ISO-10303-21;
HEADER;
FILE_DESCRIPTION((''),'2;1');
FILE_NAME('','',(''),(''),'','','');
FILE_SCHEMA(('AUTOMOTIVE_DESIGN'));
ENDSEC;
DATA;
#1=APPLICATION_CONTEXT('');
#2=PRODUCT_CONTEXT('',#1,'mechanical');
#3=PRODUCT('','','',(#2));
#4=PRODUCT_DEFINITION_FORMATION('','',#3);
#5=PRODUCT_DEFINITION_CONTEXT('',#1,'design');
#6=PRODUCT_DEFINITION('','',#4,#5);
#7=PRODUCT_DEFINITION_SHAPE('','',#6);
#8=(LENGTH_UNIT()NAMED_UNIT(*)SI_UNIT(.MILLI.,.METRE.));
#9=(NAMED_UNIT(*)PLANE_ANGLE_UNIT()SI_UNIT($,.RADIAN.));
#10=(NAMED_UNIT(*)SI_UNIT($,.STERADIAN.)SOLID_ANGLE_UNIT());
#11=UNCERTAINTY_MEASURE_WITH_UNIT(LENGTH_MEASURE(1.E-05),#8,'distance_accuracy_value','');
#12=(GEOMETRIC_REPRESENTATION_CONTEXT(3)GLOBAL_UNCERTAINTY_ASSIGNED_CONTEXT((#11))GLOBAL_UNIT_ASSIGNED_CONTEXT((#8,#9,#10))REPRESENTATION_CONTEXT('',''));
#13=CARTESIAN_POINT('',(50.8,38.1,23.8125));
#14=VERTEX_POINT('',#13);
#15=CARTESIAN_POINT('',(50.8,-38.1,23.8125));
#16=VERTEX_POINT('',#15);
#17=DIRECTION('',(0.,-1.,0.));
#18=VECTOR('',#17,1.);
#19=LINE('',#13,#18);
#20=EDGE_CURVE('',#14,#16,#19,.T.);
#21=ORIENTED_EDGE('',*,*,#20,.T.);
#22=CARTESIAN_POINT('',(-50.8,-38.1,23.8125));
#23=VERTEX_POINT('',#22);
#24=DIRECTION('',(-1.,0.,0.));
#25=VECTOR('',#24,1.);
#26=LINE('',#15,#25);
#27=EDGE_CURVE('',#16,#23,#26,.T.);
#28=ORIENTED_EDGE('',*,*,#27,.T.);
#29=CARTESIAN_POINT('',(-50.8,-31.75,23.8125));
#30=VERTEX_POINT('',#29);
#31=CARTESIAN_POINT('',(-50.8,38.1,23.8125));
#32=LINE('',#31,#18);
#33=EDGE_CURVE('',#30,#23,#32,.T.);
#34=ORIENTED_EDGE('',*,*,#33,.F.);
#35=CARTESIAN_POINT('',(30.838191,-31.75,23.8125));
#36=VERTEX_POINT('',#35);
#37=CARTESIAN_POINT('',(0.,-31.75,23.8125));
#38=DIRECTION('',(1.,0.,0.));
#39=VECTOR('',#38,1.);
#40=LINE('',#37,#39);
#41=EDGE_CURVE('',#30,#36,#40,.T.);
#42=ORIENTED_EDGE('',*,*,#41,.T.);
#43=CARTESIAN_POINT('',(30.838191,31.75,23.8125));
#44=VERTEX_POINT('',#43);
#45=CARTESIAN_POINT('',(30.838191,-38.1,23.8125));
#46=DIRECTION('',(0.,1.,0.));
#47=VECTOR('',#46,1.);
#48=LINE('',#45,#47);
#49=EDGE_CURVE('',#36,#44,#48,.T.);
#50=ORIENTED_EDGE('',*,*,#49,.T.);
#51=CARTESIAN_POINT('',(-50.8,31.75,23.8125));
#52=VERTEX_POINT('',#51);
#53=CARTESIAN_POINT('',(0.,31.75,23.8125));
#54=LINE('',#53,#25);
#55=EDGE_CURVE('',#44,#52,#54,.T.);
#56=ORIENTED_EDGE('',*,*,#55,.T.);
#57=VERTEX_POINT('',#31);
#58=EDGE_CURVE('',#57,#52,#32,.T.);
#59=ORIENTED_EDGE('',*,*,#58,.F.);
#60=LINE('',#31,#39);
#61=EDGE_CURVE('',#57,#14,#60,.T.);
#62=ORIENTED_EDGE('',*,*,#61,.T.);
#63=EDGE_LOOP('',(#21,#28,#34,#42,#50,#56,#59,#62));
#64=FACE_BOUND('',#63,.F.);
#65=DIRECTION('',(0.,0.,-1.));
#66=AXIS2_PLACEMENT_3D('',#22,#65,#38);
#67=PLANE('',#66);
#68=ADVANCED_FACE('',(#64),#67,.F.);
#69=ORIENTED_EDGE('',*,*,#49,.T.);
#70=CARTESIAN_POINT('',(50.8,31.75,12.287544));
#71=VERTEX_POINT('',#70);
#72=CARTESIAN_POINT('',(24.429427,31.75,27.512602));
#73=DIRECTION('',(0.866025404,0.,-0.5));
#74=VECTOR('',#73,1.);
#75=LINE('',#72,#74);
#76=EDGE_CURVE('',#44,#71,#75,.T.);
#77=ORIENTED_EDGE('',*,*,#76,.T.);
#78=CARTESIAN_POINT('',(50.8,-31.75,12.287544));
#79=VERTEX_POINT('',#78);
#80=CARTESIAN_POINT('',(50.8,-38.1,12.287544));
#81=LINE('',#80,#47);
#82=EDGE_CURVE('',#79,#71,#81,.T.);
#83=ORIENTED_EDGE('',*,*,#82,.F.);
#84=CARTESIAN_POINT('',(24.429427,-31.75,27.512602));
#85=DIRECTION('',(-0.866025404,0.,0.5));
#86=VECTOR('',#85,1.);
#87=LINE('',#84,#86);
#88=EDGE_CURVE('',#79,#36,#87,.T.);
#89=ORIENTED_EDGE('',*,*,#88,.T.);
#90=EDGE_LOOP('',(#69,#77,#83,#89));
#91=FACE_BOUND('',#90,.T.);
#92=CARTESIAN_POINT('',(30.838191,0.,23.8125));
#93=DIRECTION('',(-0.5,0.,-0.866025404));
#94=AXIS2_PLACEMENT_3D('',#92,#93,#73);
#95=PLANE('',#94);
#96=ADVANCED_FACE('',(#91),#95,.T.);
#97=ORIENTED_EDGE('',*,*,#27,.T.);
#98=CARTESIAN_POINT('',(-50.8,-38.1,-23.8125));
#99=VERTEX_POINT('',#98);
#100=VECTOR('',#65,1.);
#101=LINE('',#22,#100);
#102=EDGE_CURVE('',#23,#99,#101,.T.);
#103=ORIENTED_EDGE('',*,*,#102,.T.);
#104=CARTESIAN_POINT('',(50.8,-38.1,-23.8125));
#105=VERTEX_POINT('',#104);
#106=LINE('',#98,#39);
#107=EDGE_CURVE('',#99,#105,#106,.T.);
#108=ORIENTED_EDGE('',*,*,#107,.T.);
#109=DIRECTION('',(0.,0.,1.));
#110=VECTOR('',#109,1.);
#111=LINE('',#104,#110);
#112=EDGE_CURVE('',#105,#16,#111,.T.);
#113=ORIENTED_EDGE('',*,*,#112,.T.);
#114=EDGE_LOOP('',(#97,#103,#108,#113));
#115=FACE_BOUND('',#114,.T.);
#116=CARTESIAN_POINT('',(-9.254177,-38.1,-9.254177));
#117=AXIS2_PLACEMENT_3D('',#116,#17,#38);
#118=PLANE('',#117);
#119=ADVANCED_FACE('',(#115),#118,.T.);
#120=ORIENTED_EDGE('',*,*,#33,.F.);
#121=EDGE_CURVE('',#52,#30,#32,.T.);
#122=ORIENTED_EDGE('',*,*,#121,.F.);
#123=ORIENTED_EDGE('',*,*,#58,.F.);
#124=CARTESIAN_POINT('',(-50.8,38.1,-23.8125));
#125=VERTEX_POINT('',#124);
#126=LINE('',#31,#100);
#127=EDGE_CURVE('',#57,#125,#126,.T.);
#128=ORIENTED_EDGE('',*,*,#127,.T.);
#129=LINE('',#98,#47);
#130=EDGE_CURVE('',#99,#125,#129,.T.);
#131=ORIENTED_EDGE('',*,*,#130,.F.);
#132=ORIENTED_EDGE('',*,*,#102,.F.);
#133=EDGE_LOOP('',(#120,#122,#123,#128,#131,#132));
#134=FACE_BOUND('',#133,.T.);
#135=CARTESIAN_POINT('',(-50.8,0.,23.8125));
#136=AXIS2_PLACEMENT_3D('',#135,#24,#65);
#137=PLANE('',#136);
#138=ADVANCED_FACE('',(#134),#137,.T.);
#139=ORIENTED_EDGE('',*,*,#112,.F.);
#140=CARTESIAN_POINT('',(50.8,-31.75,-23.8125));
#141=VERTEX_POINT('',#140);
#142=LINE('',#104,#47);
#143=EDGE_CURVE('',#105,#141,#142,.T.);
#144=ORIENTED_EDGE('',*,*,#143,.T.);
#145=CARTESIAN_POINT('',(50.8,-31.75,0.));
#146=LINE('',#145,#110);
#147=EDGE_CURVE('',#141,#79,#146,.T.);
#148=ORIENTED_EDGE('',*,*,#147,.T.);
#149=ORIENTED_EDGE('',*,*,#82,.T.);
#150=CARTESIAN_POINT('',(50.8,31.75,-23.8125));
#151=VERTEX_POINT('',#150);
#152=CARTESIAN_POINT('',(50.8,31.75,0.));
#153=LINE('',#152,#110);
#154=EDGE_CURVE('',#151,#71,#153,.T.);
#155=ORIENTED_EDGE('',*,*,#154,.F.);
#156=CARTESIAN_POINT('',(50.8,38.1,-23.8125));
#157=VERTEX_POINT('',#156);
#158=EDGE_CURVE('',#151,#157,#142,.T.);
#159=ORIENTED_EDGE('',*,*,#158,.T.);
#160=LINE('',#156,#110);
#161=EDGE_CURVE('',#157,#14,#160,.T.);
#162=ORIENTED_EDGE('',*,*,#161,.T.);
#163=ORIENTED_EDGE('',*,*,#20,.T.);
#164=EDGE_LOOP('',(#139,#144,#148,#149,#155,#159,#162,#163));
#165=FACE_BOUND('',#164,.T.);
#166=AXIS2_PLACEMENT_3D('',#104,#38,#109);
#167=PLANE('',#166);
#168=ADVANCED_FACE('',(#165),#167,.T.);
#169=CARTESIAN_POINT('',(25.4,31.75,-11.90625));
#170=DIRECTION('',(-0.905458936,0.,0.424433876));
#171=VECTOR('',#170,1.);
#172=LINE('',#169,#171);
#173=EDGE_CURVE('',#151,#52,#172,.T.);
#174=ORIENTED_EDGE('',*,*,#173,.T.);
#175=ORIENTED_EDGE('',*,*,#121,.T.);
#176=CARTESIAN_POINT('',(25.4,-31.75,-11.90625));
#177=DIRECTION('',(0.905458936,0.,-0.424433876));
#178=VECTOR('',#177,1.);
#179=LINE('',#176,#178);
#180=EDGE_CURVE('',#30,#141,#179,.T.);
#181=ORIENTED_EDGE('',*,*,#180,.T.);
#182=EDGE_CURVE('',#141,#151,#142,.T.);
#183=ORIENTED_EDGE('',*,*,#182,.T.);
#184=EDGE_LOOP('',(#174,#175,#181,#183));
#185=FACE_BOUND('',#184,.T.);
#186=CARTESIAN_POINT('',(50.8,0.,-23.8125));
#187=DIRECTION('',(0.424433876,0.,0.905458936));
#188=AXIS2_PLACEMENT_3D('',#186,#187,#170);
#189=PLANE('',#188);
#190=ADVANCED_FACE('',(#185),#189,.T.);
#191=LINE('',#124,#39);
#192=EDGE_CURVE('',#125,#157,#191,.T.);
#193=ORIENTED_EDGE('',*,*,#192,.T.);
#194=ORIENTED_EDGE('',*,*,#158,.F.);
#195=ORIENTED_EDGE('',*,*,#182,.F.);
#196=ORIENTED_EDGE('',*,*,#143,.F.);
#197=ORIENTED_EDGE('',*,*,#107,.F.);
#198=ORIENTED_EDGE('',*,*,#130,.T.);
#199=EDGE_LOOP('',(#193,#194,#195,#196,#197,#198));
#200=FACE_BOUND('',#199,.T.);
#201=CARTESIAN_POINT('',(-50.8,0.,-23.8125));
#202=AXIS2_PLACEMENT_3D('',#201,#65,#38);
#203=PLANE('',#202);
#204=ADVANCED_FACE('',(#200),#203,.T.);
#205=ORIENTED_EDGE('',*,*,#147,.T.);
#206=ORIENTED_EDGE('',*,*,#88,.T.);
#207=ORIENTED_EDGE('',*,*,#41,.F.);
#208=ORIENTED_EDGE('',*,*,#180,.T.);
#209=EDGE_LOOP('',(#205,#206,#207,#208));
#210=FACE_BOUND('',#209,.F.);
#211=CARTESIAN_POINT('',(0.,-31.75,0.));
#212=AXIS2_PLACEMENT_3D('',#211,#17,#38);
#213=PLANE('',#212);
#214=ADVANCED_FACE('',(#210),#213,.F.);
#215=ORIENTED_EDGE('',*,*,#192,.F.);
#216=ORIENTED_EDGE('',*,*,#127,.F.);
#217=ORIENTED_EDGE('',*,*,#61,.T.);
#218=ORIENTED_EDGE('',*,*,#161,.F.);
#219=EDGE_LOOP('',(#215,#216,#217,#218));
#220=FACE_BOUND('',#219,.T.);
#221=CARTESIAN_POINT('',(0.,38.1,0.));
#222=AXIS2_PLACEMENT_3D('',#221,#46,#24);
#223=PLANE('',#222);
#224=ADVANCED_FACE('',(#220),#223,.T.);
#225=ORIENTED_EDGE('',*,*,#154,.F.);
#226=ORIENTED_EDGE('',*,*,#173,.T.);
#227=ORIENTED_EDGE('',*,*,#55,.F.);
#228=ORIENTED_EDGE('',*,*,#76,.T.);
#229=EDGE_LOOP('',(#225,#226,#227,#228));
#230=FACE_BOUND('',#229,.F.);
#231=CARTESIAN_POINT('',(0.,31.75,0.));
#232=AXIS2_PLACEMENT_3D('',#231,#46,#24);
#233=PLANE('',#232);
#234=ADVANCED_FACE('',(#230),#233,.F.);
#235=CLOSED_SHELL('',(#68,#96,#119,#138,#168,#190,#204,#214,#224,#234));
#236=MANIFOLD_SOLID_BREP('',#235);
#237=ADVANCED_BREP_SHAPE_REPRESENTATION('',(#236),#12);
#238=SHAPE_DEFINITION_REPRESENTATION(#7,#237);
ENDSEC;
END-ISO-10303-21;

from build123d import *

# Parameters (mm, degrees)
F1_DEPTH = 38.1
F2_W     = 101.6
F2_H     = 47.625
F3_DEPTH = 6.35
F4_W     = 101.6
F4_H     = 47.625
F5_DEPTH = 6.35


# Not quite as in the source:
# - a feature names something its author has since deleted; it is built from what else it names


with BuildPart() as f1:
    # F0 (on Front) → F1 (new body, symmetric)
    with BuildSketch(Plane.XZ):
        Polygon((50.8, 12.2875440849), (50.8, 23.8125), (30.8381908, 23.8125), align=None)
    extrude(amount=F1_DEPTH, both=True)



with BuildPart() as f1b:
    # F0 (on Front) → F1, piece 2 (new body, symmetric)
    with BuildSketch(Plane.XZ):
        Polygon((50.8, -23.8125), (-50.8, 23.8125), (-50.8, -23.8125), align=None)
    extrude(amount=F1_DEPTH, both=True)


with BuildPart() as f1_1:
    add(f1.part)

    add(f1b.part)  # F3 merges F1b
    # F2 (on face) → F3 (join)
    with BuildSketch(Plane(origin=(0, 38.1, 0), x_dir=(-1, 0, 0), z_dir=(0, 1, 0))):
        Rectangle(F2_W, F2_H)
    extrude(amount=-F3_DEPTH)

    # F4 (on face) → F5 (join)
    with BuildSketch(Plane.XZ.offset(38.1)):
        Rectangle(F4_W, F4_H)
    extrude(amount=-F5_DEPTH)


solid = f1_1.part
